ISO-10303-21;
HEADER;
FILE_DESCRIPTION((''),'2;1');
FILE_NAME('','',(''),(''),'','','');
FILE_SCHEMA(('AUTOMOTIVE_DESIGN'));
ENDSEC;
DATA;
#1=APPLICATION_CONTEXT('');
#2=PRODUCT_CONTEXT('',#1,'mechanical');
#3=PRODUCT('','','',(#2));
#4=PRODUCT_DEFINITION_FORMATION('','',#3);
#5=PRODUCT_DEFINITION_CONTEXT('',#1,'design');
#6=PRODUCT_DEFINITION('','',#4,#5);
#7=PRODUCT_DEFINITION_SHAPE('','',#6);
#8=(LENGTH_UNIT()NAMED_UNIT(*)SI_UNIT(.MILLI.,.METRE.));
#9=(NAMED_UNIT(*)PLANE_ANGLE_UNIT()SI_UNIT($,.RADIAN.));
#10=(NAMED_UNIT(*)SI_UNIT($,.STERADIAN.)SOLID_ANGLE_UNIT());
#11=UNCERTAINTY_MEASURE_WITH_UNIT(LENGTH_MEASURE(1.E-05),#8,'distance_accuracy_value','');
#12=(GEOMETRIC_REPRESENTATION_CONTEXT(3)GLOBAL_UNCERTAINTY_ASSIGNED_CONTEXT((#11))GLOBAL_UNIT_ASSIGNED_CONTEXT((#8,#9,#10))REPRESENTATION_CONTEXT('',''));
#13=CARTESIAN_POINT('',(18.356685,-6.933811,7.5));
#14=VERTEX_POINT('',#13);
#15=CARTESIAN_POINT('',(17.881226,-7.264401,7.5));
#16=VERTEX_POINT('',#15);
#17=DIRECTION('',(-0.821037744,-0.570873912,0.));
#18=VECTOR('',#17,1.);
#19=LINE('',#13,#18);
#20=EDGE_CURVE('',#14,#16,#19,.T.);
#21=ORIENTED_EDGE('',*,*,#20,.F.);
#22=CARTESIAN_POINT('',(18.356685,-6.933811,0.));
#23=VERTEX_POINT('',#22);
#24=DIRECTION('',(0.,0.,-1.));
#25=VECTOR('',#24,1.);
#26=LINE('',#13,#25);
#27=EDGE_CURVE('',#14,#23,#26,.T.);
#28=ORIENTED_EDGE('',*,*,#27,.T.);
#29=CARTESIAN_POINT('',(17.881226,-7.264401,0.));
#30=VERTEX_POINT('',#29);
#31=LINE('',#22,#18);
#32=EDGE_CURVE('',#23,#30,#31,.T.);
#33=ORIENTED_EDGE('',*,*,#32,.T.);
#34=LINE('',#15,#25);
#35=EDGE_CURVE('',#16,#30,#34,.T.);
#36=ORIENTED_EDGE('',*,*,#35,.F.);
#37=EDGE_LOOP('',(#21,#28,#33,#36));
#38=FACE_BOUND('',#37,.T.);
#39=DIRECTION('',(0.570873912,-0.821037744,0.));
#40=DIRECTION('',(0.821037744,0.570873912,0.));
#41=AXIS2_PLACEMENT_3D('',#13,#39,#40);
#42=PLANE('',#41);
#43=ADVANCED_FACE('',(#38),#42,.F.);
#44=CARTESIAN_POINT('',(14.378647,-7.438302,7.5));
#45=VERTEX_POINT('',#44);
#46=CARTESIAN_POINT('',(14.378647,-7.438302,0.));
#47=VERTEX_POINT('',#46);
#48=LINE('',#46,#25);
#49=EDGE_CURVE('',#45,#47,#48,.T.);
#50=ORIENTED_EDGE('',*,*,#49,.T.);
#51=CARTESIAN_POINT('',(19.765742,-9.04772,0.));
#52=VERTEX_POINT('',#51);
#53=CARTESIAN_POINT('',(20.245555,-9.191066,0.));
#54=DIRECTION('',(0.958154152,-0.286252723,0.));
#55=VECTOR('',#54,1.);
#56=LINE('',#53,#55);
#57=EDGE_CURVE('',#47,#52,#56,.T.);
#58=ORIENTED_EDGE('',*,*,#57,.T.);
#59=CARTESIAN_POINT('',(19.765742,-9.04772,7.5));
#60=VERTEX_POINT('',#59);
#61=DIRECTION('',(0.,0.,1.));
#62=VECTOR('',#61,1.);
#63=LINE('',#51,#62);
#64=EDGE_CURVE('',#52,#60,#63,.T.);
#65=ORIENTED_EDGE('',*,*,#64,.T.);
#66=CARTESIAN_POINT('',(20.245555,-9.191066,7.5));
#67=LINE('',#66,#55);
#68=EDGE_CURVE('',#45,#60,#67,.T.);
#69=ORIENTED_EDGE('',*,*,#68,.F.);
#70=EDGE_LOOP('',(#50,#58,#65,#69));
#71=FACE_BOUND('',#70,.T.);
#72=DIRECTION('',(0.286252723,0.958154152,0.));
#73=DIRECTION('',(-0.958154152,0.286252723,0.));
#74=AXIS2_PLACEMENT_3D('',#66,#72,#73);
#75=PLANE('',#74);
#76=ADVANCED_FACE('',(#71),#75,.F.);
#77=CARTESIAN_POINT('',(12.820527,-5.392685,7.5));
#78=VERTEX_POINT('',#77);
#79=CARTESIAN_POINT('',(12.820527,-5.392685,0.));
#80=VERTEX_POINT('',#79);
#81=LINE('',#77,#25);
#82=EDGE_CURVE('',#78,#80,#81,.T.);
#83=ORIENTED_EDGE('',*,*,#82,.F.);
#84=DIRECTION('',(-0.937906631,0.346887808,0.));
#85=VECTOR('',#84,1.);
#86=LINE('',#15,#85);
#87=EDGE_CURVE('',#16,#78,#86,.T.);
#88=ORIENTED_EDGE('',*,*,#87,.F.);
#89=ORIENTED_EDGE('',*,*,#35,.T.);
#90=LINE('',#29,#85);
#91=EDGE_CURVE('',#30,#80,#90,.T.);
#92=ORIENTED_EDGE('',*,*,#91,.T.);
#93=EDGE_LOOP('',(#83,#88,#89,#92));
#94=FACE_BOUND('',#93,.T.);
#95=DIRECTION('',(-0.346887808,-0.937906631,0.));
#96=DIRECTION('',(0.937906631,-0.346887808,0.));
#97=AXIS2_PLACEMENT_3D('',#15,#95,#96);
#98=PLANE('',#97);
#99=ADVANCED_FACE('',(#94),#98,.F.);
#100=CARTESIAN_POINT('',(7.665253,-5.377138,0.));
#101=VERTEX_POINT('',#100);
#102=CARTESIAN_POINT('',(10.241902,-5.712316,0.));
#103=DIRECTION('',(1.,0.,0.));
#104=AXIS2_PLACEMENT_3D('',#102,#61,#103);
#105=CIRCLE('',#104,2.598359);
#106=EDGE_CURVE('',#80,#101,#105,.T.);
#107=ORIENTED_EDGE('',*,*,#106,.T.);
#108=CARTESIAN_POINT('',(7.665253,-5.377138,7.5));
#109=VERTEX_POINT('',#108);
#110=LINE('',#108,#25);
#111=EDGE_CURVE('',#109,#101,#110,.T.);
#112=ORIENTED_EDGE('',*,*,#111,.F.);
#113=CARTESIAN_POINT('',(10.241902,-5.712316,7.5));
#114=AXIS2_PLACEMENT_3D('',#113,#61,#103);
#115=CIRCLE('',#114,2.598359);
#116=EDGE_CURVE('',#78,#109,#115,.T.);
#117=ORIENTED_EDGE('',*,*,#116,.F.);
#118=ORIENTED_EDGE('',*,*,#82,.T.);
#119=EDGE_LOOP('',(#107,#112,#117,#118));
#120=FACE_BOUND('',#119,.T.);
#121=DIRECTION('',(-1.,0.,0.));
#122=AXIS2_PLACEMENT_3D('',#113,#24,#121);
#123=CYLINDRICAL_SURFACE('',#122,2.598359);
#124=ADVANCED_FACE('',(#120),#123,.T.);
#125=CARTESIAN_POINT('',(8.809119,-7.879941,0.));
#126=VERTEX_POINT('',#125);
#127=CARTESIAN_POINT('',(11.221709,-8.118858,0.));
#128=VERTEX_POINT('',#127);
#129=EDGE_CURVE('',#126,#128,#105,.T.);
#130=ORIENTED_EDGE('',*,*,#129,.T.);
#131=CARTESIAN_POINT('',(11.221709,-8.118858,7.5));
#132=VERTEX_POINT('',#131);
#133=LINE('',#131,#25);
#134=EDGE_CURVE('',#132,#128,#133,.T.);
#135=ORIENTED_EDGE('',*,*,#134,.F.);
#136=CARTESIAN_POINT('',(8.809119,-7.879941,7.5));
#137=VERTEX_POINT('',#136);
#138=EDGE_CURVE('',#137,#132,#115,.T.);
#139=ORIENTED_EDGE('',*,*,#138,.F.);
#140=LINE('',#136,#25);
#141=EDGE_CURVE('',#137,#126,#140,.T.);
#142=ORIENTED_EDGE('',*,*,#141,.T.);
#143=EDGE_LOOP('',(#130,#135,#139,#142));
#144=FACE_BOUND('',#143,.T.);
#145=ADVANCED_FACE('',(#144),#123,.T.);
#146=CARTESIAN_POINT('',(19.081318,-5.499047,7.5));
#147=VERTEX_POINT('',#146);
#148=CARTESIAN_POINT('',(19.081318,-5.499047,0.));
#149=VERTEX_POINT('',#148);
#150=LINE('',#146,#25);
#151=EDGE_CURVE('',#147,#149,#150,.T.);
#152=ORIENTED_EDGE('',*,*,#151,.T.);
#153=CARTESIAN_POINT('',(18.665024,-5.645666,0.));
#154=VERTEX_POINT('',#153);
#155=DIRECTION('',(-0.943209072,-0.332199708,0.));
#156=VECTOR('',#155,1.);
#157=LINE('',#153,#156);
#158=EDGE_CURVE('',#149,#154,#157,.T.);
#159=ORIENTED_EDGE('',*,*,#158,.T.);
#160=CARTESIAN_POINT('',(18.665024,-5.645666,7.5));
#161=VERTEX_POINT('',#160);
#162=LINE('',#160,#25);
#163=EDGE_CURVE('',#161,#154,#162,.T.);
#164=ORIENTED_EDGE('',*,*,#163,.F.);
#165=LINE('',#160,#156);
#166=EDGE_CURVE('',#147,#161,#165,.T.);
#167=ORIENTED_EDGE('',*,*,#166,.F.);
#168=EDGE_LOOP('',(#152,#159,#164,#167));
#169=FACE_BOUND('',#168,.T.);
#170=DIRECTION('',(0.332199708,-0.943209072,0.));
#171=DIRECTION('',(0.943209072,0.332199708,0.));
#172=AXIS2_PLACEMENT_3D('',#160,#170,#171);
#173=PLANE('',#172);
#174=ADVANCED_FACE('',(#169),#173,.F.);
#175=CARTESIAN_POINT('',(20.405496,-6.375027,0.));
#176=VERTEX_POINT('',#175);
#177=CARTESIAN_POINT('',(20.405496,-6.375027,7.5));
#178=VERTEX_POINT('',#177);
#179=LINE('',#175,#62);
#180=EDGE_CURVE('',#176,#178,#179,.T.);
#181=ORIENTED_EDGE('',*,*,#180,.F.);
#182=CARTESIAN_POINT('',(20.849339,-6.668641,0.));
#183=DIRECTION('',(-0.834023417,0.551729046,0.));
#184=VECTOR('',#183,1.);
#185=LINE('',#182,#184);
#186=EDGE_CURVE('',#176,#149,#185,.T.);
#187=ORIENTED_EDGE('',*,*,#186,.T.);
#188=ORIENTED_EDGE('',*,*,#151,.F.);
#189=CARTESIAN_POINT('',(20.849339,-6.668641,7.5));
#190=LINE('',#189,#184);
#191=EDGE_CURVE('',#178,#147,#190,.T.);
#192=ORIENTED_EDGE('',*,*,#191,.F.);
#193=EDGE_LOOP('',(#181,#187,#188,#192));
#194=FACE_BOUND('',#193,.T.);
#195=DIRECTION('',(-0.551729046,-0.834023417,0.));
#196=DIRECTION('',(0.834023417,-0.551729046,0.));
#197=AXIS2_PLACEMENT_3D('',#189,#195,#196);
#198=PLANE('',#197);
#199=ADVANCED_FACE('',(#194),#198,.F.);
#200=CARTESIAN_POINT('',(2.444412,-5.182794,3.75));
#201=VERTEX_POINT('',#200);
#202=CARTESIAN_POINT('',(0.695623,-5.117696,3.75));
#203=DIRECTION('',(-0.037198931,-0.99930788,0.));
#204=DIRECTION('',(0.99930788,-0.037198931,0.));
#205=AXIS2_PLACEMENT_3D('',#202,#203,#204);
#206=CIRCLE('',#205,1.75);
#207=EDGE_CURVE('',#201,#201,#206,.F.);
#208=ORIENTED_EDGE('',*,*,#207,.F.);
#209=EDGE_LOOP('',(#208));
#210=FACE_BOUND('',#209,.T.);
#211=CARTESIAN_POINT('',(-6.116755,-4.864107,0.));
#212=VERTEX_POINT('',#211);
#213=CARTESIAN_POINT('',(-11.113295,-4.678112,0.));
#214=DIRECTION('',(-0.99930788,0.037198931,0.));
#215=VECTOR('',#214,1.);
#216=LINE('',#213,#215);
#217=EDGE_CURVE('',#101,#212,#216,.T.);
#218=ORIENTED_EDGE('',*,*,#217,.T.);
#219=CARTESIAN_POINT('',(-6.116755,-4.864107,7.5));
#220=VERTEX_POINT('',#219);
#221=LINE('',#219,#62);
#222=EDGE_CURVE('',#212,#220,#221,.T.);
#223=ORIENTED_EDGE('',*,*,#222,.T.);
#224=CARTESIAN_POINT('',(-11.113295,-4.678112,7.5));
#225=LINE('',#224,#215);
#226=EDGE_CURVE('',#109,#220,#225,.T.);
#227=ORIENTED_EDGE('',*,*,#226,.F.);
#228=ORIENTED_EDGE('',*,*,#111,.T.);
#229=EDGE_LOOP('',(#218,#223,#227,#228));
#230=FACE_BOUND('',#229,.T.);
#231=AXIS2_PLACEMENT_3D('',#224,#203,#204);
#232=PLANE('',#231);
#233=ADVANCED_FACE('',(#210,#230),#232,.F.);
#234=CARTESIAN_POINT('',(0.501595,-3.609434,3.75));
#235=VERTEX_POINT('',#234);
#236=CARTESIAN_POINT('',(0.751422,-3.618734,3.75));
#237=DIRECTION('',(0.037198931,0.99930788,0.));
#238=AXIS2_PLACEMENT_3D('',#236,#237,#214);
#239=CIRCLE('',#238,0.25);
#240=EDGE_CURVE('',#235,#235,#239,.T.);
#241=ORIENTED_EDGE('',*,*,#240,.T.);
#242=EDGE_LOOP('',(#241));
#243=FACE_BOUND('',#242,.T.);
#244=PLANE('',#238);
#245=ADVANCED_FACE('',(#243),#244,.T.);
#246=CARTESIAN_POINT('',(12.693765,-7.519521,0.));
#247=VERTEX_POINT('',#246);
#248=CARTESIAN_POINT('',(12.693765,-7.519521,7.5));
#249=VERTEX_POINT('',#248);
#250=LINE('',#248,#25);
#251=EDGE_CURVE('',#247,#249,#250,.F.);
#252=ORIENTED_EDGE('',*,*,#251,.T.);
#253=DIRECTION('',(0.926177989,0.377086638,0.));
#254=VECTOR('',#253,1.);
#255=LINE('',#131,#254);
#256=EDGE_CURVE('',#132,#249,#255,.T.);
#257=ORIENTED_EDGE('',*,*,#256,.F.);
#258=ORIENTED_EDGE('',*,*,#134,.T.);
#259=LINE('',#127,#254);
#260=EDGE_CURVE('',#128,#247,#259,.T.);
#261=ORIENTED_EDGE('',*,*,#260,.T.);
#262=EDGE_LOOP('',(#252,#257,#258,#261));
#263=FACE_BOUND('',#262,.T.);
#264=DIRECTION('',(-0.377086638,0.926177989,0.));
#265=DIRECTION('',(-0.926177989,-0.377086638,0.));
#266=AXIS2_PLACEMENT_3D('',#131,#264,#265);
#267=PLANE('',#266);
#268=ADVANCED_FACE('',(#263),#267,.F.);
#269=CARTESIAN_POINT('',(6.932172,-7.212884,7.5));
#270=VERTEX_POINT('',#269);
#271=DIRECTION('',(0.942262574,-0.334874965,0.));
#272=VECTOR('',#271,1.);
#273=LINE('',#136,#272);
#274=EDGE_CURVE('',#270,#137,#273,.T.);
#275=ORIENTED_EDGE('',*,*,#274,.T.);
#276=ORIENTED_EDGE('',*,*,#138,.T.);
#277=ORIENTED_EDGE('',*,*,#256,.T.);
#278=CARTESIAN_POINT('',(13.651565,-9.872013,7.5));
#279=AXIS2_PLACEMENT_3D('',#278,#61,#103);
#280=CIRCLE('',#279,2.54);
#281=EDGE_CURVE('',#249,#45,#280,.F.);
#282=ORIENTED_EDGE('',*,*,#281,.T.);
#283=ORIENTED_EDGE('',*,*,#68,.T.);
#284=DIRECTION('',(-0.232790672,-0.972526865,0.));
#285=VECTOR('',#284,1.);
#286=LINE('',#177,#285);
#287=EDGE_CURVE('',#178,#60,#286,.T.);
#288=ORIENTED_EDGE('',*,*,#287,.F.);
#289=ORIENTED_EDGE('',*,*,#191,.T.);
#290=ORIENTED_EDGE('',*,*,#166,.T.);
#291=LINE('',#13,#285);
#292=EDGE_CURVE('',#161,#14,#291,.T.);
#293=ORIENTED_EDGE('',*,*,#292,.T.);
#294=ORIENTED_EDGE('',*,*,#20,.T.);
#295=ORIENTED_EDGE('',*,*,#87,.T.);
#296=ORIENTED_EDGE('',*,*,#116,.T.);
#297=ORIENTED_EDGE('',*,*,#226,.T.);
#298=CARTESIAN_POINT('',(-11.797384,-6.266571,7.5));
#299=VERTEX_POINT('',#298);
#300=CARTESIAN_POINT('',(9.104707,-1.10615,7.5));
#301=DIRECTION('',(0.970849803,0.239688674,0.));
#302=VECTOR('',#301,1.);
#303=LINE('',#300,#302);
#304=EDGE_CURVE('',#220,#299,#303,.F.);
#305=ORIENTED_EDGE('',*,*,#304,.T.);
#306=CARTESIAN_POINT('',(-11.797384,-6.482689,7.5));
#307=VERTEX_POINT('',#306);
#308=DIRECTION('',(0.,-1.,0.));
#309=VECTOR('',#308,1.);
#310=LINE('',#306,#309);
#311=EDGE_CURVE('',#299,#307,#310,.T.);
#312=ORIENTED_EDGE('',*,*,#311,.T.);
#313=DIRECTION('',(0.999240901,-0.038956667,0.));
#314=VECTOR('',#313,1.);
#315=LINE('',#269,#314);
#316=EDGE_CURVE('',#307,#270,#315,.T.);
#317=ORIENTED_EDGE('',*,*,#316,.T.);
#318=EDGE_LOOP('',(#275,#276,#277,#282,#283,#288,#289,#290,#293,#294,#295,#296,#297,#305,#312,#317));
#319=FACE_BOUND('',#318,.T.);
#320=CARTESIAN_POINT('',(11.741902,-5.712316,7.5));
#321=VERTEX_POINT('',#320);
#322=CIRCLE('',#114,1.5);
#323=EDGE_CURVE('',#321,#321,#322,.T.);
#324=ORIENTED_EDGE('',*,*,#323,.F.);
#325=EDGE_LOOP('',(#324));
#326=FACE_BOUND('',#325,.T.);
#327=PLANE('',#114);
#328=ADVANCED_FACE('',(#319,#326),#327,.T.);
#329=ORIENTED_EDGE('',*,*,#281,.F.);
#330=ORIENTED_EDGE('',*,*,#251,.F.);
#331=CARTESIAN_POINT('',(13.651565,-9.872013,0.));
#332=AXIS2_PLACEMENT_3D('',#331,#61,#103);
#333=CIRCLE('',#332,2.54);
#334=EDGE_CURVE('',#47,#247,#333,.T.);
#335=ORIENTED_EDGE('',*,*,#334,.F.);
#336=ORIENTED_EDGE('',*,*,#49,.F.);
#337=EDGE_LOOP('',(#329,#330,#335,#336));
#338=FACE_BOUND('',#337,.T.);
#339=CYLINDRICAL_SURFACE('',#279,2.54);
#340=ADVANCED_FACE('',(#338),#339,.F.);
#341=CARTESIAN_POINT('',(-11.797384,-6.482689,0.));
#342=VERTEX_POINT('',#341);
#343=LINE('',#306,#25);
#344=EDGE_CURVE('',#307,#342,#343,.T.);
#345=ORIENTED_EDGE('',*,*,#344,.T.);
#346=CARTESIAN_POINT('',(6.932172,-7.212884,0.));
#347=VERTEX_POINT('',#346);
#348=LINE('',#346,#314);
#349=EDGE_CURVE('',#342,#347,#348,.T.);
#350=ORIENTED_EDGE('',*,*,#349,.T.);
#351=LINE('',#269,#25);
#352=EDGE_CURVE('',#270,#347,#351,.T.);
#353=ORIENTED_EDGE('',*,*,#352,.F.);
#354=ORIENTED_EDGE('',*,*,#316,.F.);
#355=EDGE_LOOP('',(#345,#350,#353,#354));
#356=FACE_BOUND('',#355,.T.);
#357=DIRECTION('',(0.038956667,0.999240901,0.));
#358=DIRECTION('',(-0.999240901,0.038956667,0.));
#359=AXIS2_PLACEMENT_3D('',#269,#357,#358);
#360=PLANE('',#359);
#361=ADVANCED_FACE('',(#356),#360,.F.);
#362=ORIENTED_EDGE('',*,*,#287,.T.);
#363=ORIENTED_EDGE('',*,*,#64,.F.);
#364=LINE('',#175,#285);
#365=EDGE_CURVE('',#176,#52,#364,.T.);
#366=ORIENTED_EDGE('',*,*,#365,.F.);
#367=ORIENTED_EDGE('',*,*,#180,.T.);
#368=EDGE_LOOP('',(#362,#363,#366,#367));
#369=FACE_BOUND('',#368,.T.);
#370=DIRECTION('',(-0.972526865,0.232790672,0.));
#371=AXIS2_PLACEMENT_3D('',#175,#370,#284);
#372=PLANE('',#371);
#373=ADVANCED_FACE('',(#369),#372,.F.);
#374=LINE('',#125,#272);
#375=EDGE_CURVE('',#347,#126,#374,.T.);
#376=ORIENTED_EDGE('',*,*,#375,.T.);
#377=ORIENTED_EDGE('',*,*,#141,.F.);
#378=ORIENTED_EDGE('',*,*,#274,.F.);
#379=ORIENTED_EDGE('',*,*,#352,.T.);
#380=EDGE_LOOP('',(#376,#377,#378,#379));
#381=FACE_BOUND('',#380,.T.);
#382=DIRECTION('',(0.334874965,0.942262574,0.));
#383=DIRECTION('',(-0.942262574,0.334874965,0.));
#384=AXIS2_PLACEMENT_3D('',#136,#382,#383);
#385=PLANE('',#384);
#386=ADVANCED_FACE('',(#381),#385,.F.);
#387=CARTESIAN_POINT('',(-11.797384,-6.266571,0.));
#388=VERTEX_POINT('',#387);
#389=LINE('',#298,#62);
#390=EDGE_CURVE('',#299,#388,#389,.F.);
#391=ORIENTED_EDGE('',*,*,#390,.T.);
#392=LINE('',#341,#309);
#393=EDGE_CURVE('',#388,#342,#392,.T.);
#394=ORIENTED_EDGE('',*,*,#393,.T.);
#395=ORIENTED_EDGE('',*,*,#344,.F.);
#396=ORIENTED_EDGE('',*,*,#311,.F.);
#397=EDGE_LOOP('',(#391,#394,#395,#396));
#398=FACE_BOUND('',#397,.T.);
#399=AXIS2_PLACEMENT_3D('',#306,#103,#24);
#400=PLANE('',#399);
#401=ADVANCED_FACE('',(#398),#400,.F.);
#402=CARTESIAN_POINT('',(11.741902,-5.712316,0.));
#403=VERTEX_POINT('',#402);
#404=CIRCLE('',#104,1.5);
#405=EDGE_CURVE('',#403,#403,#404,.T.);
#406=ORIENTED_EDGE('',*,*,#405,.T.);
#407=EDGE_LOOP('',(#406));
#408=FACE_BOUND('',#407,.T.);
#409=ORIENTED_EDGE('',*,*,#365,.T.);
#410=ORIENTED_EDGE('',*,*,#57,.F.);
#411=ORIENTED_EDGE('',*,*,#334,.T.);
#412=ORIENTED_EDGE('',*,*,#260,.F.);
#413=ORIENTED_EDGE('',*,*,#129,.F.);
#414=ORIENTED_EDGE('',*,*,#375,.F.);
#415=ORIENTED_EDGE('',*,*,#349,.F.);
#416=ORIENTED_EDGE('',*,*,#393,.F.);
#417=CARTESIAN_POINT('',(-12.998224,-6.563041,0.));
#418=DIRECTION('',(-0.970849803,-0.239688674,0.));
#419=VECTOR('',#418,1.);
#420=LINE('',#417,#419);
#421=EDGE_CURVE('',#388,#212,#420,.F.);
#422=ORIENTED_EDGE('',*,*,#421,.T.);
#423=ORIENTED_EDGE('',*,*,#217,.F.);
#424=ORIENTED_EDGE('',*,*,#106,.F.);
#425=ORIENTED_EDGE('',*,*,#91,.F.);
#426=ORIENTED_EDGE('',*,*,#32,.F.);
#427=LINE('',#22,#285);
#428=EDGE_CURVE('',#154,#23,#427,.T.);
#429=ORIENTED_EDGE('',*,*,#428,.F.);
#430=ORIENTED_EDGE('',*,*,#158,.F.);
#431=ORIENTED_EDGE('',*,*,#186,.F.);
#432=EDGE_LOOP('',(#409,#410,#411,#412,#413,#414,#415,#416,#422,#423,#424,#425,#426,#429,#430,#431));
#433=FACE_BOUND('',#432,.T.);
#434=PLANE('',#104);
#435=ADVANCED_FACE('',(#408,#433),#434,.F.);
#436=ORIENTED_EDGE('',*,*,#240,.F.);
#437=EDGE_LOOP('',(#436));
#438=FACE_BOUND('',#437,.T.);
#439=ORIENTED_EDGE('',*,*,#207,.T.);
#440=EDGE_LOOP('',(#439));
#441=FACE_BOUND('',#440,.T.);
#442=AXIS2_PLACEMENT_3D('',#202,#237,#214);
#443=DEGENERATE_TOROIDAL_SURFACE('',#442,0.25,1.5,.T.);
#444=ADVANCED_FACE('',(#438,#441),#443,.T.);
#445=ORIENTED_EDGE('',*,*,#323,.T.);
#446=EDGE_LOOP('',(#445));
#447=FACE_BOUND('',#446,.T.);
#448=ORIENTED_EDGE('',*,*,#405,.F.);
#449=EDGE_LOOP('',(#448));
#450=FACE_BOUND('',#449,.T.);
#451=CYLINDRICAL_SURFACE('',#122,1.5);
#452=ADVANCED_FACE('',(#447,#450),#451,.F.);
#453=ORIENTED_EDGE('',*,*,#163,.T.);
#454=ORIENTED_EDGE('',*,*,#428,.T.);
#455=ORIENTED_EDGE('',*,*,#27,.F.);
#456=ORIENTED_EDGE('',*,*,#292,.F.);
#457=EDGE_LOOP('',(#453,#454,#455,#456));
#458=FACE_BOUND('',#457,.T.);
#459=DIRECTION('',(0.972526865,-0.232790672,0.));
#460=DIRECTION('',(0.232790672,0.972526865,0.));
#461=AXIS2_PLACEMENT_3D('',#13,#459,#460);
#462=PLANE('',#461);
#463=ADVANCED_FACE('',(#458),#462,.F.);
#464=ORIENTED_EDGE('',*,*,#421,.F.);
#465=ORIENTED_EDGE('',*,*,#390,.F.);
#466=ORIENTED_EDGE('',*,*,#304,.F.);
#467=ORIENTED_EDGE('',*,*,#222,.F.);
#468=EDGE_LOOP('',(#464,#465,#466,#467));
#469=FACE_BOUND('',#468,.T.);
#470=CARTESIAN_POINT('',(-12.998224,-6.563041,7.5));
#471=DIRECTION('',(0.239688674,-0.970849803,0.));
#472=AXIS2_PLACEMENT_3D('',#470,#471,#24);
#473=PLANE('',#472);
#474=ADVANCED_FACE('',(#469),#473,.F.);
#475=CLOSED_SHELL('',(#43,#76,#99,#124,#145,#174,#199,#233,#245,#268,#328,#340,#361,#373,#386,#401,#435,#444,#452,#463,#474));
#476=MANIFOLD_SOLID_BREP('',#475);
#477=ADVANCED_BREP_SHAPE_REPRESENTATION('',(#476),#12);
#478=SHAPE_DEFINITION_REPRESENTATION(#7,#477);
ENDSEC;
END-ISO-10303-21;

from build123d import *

# Parameters (mm, degrees)
SKETCH1_R           = 1.5
BOSS_EXTRUDE1_DEPTH = 7.5
FILLET1_R           = 2.54
CHAMFER2_SIZE       = 2.665692085
CHAMFER2_SIZE_2     = 5
SKETCH4_R           = 1.75
BOSS_EXTRUDE2_DEPTH = 1.5
FILLET2_R           = 1.500000048
CUT_EXTRUDE1_DEPTH  = 7.5


# Some blends are built 0.0001 mm under size
with BuildPart() as part:
    # Sketch1 → Boss-Extrude1 (new body)
    with BuildSketch(Plane.XY):
        with BuildLine():
            Line((17.881226168, -7.264400992), (12.820526555, -5.392684832))
            ThreePointArc((12.820526555, -5.392684832), (10.249738142, -3.113969145), (7.665252761, -5.377138064))
            Line((7.665252761, -5.377138064), (-11.113294597, -4.678112359))
            Line((-11.113294597, -4.678112359), (-11.797383791, -5.362201553))
            Line((-11.797383791, -5.362201553), (-11.797383791, -6.482688956))
            Line((-11.797383791, -6.482688956), (6.932172042, -7.212884314))
            Line((6.932172042, -7.212884314), (8.80911881, -7.87994093))
            ThreePointArc((8.80911881, -7.87994093), (9.985840847, -8.298026499), (11.221708583, -8.118858325))
            Line((11.221708583, -8.118858325), (13.521910205, -7.18234795))
            Line((13.521910205, -7.18234795), (20.245554573, -9.191065966))
            Line((20.245554573, -9.191065966), (20.849339495, -6.668640767))
            Line((20.849339495, -6.668640767), (19.081317898, -5.499046666))
            Line((19.081317898, -5.499046666), (18.665024161, -5.64566597))
            Line((18.665024161, -5.64566597), (18.356685028, -6.933810758))
            Line((18.356685028, -6.933810758), (17.881226168, -7.264400992))
        make_face()
        with Locations((10.241902304, -5.712315853)):
            Circle(SKETCH1_R, mode=Mode.SUBTRACT)
    extrude(amount=BOSS_EXTRUDE1_DEPTH)

    # Fillet1
    fillet1_edges = [part.edges().sort_by_distance(p)[0] for p in [
        (13.521910205, -7.18234795, 3.75),
    ]]
    fillet(fillet1_edges, radius=FILLET1_R)

    # Chamfer2
    # the kernel refuses this chamfer: 5, 2.665692085 mm, written as the material it takes off along each edge
    with BuildSketch(Plane(origin=(-11.113294597, -4.678112359, -12.981362455), x_dir=(-0.7323937898878367, -0.6808812940107337, 0), z_dir=(0, 0, 1))) as chamfer2_piece_1:
        Polygon((CHAMFER2_SIZE * 0.999336395545, CHAMFER2_SIZE * 0.0364248351519), (-CHAMFER2_SIZE_2 * 0.706558829098, CHAMFER2_SIZE_2 * 0.707654308984), (0, 0), align=None)
    extrude(amount=33.462724911, mode=Mode.SUBTRACT)

    # Sketch4 → Boss-Extrude2 (add)
    with BuildSketch(Plane(origin=(-0.189278476, -5.084755532, 0), x_dir=(0.9993078802351368, -0.03719893143569399, 0), z_dir=(0.03719893143569399, 0.9993078802351368, 0))):
        with Locations((0.885514773, -3.75)):
            Circle(SKETCH4_R)
    extrude(amount=BOSS_EXTRUDE2_DEPTH)

    # Fillet2
    fillet2_edges = [part.edges().sort_by_distance(p)[0] for p in [
        (-0.997366978, -3.553635785, 3.75),
    ]]
    fillet(fillet2_edges, radius=FILLET2_R - 0.0001)  # a hair under: the kernel refuses the full size

    # Sketch5 → Cut-Extrude1 (cut)
    with BuildSketch(Plane.XY.offset(7.5)):
        Polygon((20.405496385, -6.375026546), (19.765742241, -9.047719944), (20.245554573, -9.191065966), (20.849339495, -6.668640767), align=None)
    extrude(amount=-CUT_EXTRUDE1_DEPTH, mode=Mode.SUBTRACT)


solid = part.part
